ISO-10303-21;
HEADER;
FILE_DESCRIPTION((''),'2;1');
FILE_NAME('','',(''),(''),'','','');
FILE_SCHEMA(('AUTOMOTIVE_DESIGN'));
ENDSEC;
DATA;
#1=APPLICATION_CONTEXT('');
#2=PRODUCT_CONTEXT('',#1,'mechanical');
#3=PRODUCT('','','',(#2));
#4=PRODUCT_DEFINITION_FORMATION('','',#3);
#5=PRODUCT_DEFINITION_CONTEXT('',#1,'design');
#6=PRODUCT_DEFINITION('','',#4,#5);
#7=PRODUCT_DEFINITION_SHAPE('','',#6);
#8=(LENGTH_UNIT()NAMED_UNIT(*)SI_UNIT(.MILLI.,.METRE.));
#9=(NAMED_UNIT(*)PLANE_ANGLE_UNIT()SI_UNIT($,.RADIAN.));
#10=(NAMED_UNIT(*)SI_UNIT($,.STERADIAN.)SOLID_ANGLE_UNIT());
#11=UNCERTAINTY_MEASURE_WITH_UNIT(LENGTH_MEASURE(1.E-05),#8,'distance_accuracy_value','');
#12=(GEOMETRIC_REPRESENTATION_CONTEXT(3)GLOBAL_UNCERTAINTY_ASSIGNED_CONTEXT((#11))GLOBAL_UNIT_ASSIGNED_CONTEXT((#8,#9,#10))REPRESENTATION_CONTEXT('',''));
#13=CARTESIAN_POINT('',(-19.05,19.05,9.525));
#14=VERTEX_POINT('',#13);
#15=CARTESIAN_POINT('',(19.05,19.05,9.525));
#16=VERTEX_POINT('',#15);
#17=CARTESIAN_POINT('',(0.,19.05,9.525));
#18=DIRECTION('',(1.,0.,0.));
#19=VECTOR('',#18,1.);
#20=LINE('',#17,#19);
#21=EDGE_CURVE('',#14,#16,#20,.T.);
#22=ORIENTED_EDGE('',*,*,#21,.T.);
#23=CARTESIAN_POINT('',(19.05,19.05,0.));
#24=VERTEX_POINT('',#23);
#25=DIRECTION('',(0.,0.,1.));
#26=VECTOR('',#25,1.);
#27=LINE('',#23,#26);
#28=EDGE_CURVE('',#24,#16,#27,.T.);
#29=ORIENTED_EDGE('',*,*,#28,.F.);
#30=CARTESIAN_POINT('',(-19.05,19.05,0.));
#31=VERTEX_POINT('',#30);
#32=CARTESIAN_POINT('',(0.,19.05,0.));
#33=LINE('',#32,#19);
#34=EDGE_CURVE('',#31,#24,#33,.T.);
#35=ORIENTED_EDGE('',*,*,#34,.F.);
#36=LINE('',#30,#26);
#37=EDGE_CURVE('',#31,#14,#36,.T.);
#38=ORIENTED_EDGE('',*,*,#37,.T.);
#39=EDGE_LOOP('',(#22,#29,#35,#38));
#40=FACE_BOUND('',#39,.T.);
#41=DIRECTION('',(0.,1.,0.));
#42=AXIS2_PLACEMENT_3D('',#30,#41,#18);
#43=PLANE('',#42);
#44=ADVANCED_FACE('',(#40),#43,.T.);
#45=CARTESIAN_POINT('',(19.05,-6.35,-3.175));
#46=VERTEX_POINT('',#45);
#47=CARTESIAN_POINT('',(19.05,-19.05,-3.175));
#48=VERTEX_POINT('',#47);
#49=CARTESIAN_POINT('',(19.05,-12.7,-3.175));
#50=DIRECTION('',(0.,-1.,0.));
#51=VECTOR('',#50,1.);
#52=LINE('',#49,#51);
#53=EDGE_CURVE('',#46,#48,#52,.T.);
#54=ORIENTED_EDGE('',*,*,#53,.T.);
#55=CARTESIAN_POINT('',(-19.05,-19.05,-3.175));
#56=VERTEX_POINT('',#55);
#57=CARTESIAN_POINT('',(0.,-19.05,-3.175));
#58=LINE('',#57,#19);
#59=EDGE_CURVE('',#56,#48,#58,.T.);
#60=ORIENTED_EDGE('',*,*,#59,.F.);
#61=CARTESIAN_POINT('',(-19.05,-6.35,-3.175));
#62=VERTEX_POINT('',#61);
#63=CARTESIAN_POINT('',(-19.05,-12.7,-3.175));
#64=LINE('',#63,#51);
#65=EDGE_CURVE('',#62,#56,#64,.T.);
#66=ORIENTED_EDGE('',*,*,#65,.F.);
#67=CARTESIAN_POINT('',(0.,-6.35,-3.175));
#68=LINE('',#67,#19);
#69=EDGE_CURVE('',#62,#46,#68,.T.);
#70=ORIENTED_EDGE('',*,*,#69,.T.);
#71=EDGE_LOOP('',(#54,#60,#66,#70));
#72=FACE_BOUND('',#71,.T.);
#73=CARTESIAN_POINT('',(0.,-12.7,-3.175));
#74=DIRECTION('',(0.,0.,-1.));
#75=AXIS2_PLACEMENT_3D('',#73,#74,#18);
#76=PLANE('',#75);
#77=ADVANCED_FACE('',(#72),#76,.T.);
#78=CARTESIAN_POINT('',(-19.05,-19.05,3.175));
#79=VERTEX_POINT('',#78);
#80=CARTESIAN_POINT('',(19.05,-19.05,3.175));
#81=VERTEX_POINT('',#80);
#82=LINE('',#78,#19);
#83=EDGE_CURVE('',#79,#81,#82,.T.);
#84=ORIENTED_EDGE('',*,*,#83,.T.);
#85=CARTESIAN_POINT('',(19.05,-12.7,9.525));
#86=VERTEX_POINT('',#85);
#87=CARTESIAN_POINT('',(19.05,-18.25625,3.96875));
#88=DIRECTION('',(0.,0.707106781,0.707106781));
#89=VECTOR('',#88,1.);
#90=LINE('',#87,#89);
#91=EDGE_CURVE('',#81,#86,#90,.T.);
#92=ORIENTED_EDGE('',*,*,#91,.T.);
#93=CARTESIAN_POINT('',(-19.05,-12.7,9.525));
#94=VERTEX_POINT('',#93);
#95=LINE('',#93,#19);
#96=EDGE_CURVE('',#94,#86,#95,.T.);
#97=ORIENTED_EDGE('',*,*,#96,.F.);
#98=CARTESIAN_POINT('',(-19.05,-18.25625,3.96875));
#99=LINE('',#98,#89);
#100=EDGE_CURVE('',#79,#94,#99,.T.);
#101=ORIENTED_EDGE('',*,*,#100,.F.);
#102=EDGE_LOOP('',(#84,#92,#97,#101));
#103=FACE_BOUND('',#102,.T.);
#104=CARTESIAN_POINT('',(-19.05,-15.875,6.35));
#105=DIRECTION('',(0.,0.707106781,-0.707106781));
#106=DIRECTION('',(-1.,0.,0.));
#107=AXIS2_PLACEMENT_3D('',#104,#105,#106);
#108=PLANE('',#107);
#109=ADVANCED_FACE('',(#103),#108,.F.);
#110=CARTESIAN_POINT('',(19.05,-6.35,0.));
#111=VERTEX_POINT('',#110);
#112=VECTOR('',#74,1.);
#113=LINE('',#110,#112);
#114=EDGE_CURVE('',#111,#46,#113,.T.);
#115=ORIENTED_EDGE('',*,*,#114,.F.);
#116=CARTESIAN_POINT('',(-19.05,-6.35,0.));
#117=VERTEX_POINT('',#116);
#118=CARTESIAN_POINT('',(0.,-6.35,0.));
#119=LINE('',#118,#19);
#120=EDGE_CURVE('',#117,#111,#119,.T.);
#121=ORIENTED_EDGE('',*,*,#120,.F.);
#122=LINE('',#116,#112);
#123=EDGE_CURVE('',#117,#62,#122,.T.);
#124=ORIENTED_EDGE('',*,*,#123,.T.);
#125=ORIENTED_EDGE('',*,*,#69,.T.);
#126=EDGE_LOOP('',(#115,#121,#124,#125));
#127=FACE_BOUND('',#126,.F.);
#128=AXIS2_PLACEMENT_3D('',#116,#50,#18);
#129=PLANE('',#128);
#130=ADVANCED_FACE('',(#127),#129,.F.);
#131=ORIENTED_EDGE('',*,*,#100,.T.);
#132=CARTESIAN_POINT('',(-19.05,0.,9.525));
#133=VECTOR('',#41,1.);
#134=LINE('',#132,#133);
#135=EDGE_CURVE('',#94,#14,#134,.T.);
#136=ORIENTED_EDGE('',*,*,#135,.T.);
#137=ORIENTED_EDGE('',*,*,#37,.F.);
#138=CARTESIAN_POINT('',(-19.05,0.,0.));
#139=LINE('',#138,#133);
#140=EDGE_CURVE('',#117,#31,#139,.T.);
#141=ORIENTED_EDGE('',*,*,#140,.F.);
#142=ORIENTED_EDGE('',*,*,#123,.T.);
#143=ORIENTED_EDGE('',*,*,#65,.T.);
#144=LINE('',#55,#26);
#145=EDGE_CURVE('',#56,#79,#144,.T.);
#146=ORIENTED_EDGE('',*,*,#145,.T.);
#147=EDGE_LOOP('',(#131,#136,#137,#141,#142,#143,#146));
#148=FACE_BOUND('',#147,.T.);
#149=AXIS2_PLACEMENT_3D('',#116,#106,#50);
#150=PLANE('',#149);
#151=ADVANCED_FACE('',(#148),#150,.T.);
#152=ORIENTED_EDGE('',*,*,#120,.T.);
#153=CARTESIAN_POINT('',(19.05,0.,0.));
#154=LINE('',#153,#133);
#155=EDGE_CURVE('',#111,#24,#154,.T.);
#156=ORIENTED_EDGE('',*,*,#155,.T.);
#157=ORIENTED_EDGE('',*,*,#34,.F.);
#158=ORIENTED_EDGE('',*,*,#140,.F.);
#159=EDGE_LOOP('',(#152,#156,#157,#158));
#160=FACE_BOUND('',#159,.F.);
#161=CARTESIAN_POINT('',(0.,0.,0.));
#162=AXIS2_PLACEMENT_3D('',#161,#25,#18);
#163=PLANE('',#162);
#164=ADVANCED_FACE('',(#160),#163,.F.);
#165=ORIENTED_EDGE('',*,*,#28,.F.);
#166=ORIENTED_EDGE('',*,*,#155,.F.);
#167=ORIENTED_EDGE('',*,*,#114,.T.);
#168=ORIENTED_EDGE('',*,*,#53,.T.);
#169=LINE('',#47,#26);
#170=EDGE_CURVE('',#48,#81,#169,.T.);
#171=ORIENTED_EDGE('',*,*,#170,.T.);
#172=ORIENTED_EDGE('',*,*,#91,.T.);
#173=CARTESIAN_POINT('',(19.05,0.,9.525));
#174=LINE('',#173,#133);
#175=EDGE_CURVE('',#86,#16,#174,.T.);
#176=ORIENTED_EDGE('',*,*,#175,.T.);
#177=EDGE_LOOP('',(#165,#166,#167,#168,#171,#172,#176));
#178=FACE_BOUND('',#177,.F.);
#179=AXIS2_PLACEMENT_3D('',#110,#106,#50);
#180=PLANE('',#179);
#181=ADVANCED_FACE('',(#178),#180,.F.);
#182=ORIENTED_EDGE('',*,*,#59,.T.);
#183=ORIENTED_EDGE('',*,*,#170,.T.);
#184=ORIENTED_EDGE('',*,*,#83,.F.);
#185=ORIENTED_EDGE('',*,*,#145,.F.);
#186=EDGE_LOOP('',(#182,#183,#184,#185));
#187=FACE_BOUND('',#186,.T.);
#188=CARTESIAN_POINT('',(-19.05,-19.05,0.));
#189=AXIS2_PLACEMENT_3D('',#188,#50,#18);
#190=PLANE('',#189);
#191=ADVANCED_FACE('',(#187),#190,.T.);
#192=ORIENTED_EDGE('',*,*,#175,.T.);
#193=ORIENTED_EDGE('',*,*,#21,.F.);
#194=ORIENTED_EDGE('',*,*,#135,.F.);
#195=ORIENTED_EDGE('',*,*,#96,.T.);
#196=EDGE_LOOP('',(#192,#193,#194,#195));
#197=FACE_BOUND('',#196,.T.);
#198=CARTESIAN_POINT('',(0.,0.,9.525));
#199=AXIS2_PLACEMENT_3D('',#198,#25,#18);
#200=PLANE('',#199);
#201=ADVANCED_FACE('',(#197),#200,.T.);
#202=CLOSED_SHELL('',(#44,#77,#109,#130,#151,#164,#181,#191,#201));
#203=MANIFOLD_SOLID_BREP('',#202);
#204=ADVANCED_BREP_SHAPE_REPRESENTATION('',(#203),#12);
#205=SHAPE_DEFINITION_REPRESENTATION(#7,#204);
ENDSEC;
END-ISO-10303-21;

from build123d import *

# Parameters (mm, degrees)
F0_W     = 38.1
F0_H     = 38.1
F1_DEPTH = 9.525
F2_SIZE  = 6.35
F3_W     = 38.1
F3_H     = 12.7
F4_DEPTH = 3.175


# Not quite as in the source:
# - a feature of the source that left no trace in its solid (it failed there, or was rolled back) is left out


with BuildPart() as f1:
    # F0 (on Top) → F1 (new body)
    with BuildSketch(Plane.XY):
        Rectangle(F0_W, F0_H)
    extrude(amount=F1_DEPTH)

    # F2
    f2_edges = [f1.edges().sort_by_distance(p)[0] for p in [
        (0, -19.05, 9.525),
    ]]
    chamfer(f2_edges, length=F2_SIZE)

    # F3 (on face) → F4 (join)
    with BuildSketch(Plane(origin=(0, 0, 0), x_dir=(1, 0, 0), z_dir=(0, 0, -1))):
        with Locations((0, 12.7)):
            Rectangle(F3_W, F3_H)
    extrude(amount=F4_DEPTH)


solid = f1.part
